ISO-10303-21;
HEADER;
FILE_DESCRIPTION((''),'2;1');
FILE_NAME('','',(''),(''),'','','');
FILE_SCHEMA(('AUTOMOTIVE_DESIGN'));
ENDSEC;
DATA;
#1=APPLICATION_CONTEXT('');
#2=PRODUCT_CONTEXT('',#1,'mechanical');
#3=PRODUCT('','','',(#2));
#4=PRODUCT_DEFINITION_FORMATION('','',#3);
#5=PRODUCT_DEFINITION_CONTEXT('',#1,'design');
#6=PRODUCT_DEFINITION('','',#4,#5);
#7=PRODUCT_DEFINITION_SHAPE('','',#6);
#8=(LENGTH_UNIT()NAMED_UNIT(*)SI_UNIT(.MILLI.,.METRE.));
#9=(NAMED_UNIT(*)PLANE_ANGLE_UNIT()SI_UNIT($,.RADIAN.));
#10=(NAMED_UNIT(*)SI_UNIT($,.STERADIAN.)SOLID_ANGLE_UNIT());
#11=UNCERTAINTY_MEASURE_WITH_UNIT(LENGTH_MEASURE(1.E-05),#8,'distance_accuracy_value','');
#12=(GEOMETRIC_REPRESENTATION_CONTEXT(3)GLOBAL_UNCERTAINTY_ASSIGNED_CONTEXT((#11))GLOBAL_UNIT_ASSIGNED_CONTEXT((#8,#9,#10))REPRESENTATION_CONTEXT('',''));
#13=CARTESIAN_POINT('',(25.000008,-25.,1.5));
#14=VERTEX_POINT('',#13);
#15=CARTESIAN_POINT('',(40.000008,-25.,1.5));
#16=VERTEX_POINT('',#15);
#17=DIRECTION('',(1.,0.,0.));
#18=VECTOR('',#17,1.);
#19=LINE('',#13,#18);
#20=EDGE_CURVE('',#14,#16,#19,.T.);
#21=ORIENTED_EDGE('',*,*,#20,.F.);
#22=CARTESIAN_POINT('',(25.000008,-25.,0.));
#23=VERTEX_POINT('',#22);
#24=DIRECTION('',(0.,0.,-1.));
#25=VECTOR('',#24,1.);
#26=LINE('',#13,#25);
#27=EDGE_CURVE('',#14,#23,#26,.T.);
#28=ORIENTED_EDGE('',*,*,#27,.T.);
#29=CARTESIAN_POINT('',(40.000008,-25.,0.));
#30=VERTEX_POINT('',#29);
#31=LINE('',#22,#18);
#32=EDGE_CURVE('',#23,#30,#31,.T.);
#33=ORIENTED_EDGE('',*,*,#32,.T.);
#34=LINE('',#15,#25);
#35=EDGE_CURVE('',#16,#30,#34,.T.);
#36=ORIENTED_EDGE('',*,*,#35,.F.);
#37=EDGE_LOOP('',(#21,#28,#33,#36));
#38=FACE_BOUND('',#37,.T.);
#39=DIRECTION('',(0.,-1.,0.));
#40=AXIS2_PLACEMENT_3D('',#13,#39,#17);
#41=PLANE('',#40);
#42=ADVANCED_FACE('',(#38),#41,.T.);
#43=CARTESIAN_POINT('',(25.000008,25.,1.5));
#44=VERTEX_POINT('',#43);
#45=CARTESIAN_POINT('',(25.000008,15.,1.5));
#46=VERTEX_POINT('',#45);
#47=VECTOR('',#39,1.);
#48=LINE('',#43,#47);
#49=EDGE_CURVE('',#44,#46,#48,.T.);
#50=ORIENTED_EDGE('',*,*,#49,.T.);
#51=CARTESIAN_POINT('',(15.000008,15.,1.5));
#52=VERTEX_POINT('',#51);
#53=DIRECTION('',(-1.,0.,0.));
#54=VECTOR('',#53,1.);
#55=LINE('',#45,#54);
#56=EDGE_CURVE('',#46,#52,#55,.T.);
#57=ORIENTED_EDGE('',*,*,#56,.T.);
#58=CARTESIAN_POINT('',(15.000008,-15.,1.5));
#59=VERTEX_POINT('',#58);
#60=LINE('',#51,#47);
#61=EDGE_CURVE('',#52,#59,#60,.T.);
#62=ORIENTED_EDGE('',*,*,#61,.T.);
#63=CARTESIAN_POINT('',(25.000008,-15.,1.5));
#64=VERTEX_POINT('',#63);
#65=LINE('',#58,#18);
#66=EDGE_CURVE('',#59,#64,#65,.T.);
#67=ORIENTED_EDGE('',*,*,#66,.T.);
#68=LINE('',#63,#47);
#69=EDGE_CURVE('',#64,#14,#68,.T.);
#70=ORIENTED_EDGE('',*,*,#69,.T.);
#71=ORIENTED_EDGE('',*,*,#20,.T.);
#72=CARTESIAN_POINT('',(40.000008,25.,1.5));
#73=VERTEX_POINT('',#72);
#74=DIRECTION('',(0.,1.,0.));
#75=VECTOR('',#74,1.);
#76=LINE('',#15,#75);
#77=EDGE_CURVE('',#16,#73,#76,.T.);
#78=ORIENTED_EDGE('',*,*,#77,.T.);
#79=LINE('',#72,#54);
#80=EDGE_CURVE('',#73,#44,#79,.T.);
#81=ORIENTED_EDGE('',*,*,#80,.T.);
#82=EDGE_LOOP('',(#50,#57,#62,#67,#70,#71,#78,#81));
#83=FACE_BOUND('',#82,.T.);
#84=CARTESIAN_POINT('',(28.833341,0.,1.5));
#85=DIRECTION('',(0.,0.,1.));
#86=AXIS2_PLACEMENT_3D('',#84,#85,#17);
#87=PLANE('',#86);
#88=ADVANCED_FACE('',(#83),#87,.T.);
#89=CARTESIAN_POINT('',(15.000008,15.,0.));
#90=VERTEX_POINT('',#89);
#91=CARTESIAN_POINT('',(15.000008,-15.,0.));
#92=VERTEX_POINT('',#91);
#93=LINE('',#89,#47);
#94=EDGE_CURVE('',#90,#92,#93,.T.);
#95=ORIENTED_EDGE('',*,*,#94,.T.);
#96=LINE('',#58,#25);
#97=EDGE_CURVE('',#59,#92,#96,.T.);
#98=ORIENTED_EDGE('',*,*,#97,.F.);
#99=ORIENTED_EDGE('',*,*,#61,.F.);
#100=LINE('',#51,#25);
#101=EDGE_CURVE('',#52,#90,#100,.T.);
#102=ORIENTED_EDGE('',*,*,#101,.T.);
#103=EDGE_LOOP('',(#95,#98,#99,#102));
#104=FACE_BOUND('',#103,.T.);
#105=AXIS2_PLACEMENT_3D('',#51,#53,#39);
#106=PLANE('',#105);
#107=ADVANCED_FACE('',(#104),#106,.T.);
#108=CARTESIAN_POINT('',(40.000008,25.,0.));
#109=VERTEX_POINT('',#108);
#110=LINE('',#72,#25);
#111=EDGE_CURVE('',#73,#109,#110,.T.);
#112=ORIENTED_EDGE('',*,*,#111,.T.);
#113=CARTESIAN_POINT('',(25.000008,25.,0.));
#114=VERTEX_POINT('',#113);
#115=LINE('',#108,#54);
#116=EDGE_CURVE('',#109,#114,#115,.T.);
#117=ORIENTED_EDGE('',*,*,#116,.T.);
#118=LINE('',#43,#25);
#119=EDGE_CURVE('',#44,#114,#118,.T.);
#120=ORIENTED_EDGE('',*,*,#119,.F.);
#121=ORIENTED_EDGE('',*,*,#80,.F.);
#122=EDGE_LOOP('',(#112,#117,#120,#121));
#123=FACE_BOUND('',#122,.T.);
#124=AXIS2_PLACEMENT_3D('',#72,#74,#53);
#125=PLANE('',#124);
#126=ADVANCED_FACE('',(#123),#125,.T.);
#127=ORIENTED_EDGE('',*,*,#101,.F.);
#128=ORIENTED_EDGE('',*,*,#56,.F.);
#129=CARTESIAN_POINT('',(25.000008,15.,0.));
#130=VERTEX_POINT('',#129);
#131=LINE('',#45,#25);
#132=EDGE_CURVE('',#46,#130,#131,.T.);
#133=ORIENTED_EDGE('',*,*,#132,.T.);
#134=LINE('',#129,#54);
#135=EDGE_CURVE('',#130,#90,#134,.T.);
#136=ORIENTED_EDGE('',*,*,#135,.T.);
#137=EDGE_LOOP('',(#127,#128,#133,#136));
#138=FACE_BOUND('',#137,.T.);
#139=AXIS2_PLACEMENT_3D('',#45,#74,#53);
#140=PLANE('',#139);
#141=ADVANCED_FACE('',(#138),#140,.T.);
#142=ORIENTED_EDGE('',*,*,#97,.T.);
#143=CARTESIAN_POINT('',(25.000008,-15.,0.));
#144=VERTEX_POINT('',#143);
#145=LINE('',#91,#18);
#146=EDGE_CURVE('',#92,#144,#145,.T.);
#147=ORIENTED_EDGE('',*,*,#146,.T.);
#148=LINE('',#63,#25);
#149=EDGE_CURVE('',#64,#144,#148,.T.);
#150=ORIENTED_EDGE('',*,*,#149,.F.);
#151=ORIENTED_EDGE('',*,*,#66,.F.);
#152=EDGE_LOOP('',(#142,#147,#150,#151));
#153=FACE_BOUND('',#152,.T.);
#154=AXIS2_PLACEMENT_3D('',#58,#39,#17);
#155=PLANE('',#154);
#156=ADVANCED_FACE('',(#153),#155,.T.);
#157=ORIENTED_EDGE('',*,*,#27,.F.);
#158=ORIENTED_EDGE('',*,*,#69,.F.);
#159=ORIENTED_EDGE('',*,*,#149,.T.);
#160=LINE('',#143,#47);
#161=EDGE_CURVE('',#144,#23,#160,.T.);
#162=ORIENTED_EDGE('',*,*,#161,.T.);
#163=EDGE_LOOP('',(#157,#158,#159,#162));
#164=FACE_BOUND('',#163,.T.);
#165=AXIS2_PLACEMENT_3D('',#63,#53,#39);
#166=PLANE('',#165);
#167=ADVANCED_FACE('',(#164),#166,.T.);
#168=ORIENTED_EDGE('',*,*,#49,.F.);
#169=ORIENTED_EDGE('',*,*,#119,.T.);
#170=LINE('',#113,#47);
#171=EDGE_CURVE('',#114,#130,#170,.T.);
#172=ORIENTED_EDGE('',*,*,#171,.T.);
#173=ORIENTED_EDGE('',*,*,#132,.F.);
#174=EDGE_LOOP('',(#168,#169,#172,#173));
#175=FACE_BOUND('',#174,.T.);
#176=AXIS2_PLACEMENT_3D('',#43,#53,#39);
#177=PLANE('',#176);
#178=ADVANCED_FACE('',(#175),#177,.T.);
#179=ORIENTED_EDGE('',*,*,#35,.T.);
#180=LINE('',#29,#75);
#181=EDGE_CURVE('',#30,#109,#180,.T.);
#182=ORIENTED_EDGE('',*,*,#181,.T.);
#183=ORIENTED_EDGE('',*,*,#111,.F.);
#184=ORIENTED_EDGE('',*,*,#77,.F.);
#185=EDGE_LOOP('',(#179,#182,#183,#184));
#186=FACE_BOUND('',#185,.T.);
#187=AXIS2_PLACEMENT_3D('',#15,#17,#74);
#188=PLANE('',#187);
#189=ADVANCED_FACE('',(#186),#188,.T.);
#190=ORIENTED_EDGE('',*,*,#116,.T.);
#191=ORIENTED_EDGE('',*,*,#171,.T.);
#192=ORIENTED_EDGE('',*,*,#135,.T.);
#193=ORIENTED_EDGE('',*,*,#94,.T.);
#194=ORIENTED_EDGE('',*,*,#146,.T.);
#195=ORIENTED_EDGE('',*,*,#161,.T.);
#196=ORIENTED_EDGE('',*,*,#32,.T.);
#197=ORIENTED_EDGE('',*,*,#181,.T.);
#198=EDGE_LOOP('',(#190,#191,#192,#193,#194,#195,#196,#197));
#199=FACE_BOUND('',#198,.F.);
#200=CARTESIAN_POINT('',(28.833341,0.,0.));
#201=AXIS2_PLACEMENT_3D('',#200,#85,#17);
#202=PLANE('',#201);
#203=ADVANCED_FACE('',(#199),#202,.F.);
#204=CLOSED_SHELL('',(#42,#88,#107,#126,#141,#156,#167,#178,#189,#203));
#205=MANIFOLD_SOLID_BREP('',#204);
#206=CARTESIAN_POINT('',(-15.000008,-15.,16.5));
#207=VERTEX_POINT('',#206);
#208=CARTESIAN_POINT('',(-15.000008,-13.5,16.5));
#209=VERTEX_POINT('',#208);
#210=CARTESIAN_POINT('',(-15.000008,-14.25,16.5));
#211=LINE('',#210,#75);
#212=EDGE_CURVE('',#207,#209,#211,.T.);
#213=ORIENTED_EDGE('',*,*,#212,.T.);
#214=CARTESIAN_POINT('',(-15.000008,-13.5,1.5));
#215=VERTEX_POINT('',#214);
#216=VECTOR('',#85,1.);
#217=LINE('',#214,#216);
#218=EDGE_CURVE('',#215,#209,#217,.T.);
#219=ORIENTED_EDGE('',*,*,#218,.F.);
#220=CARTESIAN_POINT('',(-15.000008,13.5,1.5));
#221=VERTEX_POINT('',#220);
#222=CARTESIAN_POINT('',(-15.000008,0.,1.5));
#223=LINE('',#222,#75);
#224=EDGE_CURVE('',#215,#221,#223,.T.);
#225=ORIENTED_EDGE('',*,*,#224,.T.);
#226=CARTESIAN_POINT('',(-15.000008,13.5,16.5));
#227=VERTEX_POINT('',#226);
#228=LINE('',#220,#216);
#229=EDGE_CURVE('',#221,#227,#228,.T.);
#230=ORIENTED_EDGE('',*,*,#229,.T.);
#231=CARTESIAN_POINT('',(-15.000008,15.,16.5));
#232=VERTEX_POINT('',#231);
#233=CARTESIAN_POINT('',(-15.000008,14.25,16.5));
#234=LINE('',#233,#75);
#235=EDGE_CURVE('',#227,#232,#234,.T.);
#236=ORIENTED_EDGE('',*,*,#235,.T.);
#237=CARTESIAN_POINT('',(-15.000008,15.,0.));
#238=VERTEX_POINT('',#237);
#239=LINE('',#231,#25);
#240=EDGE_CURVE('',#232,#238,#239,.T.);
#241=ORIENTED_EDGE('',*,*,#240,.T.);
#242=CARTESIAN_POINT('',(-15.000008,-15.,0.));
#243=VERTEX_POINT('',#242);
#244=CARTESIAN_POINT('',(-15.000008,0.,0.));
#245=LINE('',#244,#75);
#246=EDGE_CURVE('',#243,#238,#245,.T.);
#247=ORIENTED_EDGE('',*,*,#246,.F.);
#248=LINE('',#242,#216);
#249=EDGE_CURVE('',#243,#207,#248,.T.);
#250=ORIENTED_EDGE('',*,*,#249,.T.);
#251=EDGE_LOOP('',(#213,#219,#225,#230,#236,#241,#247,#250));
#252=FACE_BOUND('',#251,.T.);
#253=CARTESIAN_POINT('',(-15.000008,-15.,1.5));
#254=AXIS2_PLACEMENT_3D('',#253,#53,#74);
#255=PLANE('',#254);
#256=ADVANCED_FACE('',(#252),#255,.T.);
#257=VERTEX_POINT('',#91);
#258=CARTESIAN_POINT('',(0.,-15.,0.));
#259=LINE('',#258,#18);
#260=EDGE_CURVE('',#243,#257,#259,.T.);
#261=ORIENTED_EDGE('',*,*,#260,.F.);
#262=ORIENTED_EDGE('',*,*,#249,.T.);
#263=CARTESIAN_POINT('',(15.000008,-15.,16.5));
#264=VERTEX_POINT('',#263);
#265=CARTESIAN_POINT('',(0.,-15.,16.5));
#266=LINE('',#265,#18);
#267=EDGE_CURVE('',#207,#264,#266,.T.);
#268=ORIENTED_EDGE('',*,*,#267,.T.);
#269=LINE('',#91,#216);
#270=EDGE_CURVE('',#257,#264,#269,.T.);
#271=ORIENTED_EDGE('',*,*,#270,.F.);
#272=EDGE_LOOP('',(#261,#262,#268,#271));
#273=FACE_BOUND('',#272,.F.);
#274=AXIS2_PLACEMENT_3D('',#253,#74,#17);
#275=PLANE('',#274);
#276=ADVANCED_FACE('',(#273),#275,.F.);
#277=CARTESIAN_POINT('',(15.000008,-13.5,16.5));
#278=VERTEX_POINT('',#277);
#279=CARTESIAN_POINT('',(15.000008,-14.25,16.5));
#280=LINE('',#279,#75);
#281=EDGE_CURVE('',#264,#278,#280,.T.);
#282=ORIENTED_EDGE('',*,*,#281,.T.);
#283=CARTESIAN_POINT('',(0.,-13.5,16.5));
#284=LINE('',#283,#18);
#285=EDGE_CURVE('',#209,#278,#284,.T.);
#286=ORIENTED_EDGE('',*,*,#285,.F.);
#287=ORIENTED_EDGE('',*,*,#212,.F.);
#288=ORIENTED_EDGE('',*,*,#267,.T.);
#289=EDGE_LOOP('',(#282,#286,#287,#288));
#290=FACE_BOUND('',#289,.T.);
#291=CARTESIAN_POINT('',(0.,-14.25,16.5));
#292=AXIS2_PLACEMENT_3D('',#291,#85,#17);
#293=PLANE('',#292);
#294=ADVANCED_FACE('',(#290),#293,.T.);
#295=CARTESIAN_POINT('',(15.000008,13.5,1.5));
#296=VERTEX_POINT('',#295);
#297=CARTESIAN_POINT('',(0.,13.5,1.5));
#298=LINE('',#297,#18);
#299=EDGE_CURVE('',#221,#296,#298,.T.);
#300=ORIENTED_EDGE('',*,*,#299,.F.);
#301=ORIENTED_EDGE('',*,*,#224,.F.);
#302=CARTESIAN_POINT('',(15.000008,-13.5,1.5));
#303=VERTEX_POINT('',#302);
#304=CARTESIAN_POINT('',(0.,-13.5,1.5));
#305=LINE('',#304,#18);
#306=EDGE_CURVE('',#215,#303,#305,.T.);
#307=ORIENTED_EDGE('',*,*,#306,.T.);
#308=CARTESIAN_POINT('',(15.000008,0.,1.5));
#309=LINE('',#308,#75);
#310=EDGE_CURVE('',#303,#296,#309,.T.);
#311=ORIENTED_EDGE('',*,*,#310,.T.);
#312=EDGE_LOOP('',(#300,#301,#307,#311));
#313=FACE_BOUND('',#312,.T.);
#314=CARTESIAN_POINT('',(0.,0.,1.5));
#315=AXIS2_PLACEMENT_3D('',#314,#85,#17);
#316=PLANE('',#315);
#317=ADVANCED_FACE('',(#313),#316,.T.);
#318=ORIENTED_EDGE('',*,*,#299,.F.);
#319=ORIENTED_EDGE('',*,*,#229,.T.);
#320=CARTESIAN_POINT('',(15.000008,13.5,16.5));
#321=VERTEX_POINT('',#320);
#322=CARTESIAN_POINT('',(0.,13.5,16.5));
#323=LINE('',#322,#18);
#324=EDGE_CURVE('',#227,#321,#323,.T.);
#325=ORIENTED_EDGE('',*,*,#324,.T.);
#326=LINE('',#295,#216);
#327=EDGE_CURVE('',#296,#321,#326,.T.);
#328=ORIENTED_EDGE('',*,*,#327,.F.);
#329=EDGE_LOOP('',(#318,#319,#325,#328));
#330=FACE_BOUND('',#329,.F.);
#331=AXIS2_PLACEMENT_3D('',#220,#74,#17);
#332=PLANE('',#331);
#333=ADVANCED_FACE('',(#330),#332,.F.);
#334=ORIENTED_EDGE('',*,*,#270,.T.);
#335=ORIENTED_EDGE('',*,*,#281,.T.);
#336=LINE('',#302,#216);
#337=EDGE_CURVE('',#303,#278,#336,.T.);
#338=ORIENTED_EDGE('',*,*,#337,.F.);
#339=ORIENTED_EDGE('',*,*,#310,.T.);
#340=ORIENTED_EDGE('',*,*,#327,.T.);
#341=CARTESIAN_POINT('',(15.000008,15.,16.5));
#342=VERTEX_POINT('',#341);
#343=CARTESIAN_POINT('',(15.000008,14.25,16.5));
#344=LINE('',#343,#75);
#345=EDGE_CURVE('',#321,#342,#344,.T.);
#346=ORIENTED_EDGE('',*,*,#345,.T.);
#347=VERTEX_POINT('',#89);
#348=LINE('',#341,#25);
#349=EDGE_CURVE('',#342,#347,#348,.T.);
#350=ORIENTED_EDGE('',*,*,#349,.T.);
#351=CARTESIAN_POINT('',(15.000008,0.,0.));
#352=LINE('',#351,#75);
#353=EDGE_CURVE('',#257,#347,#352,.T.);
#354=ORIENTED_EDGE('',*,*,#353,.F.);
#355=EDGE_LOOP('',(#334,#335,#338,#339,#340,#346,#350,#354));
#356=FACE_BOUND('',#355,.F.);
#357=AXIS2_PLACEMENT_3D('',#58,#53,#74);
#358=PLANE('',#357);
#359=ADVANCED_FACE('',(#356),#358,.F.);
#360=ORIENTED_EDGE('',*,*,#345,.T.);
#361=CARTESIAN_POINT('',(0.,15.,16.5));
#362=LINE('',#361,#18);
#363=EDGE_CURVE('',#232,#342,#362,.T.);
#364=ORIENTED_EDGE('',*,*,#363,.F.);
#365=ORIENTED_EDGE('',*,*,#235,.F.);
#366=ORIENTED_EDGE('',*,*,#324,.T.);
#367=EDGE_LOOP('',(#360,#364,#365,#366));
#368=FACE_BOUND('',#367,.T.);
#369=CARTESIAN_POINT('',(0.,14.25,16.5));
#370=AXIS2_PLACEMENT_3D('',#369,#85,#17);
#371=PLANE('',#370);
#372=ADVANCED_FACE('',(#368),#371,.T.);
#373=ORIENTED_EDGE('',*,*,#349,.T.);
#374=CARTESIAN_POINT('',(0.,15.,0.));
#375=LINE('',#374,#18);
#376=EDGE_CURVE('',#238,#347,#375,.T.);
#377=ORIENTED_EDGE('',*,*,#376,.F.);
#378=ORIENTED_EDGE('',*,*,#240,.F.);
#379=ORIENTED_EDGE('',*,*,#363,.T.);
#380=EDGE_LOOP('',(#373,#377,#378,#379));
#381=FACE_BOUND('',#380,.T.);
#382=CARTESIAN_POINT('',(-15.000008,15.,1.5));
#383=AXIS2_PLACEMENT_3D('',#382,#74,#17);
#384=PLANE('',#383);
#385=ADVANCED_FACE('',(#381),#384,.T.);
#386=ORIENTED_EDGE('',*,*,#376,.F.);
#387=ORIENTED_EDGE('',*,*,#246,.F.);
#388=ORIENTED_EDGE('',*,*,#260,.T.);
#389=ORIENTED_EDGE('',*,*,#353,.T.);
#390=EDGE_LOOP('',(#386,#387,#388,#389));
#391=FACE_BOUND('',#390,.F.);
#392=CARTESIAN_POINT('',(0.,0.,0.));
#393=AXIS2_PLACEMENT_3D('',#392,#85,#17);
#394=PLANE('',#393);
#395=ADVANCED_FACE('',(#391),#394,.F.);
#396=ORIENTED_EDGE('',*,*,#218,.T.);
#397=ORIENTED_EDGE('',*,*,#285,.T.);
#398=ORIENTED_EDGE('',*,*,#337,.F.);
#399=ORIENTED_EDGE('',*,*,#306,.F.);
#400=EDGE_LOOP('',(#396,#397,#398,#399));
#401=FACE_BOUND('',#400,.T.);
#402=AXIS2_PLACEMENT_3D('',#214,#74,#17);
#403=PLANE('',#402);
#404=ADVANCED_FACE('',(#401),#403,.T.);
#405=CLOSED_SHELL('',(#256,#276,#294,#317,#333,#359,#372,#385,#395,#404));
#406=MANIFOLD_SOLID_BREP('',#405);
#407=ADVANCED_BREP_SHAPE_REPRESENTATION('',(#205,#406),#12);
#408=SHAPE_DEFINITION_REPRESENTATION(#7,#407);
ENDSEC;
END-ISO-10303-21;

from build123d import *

# Parameters (mm, degrees)
F0_W     = 30.0000150987
F0_H     = 30
F1_DEPTH = 1.5
F3_DEPTH = 1.5
F4_W     = 30.0000150987
F4_H     = 1.5
F5_DEPTH = 15
F6_W     = 30.0000150987
F6_H     = 1.5
F7_DEPTH = 15


with BuildPart() as f1:
    # F0 (on Top) → F1 (new body)
    with BuildSketch(Plane.XY):
        Rectangle(F0_W, F0_H)
    extrude(amount=F1_DEPTH)

    # F4 (on face) → F5 (join)
    with BuildSketch(Plane.XY.offset(1.5)):
        with Locations((0, 14.25)):
            Rectangle(F4_W, F4_H)
    extrude(amount=F5_DEPTH)

    # F6 (on face) → F7 (join)
    with BuildSketch(Plane.XY.offset(1.5)):
        with Locations((0, -14.25)):
            Rectangle(F6_W, F6_H)
    extrude(amount=F7_DEPTH)


with BuildPart() as f3:
    # F2 (on face) → F3 (new body)
    with BuildSketch(Plane.XY.offset(1.5)):
        Polygon((25.0000075493, 15), (15.0000075493, 15), (15.0000075493, -15), (25.0000075493, -15), (25.0000075493, -25), (40.0000075493, -25), (40.0000075493, 25), (25.0000075493, 25), align=None)
    extrude(amount=-F3_DEPTH)


solid = Compound([f1.part, f3.part])
